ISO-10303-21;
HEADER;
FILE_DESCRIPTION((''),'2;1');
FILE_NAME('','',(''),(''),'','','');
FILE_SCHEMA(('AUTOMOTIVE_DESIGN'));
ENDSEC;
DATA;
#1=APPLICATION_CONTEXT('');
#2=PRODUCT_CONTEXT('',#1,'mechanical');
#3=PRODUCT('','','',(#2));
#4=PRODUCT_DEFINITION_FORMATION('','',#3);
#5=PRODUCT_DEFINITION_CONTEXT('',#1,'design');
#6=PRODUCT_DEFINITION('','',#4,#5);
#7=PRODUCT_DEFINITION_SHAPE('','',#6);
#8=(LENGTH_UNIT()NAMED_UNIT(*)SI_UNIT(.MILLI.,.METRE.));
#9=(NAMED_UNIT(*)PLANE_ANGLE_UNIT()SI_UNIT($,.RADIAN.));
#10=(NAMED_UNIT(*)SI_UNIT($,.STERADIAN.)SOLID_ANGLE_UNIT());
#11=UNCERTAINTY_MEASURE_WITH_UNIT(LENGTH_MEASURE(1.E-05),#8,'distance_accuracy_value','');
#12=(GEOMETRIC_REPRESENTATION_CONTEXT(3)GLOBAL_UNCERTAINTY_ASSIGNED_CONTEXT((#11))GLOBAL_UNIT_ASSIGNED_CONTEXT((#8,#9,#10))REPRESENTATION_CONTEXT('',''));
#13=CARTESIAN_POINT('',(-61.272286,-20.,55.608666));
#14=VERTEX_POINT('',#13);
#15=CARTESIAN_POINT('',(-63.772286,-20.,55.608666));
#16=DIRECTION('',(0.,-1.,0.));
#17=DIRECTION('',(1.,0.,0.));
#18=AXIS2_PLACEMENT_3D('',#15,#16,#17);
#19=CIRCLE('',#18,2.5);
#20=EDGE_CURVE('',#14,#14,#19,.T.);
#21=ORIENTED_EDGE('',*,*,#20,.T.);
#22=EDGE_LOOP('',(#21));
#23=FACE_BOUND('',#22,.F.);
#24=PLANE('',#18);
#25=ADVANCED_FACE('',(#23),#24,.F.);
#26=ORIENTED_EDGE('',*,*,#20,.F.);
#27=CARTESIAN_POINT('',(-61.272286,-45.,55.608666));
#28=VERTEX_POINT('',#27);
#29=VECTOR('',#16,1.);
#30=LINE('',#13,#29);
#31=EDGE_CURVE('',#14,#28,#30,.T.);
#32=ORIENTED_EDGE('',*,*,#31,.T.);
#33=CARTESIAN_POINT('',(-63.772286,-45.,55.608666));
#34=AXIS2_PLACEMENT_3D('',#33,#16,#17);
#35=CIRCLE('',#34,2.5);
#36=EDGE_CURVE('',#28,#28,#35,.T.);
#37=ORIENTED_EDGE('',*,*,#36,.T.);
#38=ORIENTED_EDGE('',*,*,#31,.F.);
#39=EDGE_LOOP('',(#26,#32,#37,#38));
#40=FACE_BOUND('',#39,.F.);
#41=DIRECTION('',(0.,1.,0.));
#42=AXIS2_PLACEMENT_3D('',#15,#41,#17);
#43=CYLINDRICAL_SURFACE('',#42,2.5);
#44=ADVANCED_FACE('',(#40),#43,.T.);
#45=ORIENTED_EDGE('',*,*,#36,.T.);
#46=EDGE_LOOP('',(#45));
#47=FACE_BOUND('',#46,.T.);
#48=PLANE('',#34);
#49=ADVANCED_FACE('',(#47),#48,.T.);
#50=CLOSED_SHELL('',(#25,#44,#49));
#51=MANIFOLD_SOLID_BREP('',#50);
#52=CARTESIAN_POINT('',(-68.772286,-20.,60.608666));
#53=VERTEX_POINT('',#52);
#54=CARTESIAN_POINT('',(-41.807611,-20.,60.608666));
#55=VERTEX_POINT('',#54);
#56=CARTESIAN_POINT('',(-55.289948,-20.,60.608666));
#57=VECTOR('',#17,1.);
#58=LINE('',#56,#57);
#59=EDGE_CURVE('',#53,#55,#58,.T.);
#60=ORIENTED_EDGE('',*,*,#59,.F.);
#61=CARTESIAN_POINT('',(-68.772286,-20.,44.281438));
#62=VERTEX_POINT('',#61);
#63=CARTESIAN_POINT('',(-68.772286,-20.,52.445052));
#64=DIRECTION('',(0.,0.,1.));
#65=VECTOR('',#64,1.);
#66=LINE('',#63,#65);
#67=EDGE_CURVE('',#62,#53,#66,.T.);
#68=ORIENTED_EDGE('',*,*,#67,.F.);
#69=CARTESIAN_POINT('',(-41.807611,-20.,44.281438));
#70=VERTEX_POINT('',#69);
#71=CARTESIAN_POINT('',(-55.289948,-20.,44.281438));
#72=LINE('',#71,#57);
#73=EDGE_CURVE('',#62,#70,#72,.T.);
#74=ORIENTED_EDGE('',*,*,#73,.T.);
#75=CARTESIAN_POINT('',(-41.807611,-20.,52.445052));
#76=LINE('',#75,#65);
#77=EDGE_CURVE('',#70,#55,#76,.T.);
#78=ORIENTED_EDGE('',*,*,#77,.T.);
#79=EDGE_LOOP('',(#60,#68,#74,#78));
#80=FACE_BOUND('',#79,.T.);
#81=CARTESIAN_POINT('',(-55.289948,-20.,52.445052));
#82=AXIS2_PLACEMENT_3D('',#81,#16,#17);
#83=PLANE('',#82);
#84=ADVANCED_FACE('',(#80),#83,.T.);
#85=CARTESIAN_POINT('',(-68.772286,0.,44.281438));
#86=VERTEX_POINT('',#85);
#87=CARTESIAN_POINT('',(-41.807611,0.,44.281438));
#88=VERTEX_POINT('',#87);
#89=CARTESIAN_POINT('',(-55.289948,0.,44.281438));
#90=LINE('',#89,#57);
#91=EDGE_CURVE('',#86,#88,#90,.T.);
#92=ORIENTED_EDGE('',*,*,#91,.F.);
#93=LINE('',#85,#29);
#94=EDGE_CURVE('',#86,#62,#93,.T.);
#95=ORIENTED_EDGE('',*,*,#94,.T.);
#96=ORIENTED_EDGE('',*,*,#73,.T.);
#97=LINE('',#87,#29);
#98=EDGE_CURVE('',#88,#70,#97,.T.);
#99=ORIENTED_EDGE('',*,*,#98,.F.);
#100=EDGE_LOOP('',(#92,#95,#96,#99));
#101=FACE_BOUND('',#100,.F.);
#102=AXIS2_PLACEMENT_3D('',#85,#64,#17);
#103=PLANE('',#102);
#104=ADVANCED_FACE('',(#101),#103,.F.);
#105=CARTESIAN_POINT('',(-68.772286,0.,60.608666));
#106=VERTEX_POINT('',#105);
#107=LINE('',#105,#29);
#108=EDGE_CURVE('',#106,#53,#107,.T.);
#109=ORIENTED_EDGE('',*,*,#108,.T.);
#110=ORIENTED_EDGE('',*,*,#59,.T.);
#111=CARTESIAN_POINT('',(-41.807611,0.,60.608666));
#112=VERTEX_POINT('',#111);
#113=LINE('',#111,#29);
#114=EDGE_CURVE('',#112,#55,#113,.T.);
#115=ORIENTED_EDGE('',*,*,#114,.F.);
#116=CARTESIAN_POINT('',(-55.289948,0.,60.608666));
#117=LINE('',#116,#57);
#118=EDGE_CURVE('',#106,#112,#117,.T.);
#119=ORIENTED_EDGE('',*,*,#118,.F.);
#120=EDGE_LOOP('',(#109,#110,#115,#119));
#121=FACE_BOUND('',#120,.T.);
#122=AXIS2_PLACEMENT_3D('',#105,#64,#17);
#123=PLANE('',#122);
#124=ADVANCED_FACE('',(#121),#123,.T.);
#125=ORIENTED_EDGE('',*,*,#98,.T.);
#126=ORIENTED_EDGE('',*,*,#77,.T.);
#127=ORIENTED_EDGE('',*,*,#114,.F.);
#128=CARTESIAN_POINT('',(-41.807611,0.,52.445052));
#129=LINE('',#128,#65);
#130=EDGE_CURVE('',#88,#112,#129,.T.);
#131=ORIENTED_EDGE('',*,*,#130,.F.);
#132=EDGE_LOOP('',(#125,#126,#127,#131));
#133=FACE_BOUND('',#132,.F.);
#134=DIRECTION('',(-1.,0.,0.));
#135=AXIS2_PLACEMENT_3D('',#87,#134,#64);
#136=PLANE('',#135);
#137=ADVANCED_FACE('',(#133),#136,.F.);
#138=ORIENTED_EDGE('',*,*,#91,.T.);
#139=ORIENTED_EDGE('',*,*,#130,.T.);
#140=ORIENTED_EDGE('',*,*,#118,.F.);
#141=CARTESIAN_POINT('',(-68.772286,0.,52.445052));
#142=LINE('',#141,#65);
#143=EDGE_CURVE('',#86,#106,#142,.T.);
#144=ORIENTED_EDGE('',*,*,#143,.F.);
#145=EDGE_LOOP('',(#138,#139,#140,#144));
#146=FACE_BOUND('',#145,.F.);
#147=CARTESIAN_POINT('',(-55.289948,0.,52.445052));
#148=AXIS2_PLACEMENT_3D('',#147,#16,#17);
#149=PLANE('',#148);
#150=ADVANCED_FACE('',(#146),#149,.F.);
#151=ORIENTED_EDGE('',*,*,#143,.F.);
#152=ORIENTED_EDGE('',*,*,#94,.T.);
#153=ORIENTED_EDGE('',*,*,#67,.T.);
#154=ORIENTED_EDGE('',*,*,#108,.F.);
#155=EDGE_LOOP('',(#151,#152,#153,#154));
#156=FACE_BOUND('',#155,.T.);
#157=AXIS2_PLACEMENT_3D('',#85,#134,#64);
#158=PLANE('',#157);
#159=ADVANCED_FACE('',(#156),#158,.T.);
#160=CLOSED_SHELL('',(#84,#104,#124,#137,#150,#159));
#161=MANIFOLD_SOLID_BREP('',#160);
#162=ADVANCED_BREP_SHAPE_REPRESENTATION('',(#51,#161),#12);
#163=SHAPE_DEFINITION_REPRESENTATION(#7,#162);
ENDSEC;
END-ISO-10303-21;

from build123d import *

# Parameters (mm, degrees)
F0_W     = 26.9646756351
F0_H     = 16.3272283971
F1_DEPTH = 20
F2_R     = 2.5
F3_DEPTH = 25


# Not quite as in the source:
# - the program builds the solid bodies; features that only make, move or delete a surface that nothing else refers to are left out


with BuildPart() as f1:
    # F0 (on Front) → F1 (new body)
    with BuildSketch(Plane.XZ):
        with Locations((-55.2899483591, 52.4450521916)):
            Rectangle(F0_W, F0_H)
    extrude(amount=F1_DEPTH)


with BuildPart() as f3:
    # F2 (on face) → F3 (new body)
    with BuildSketch(Plane.XZ.offset(20)):
        with Locations((-63.7722861767, 55.6086663902)):
            Circle(F2_R)
    extrude(amount=F3_DEPTH)


solid = Compound([f1.part, f3.part])
